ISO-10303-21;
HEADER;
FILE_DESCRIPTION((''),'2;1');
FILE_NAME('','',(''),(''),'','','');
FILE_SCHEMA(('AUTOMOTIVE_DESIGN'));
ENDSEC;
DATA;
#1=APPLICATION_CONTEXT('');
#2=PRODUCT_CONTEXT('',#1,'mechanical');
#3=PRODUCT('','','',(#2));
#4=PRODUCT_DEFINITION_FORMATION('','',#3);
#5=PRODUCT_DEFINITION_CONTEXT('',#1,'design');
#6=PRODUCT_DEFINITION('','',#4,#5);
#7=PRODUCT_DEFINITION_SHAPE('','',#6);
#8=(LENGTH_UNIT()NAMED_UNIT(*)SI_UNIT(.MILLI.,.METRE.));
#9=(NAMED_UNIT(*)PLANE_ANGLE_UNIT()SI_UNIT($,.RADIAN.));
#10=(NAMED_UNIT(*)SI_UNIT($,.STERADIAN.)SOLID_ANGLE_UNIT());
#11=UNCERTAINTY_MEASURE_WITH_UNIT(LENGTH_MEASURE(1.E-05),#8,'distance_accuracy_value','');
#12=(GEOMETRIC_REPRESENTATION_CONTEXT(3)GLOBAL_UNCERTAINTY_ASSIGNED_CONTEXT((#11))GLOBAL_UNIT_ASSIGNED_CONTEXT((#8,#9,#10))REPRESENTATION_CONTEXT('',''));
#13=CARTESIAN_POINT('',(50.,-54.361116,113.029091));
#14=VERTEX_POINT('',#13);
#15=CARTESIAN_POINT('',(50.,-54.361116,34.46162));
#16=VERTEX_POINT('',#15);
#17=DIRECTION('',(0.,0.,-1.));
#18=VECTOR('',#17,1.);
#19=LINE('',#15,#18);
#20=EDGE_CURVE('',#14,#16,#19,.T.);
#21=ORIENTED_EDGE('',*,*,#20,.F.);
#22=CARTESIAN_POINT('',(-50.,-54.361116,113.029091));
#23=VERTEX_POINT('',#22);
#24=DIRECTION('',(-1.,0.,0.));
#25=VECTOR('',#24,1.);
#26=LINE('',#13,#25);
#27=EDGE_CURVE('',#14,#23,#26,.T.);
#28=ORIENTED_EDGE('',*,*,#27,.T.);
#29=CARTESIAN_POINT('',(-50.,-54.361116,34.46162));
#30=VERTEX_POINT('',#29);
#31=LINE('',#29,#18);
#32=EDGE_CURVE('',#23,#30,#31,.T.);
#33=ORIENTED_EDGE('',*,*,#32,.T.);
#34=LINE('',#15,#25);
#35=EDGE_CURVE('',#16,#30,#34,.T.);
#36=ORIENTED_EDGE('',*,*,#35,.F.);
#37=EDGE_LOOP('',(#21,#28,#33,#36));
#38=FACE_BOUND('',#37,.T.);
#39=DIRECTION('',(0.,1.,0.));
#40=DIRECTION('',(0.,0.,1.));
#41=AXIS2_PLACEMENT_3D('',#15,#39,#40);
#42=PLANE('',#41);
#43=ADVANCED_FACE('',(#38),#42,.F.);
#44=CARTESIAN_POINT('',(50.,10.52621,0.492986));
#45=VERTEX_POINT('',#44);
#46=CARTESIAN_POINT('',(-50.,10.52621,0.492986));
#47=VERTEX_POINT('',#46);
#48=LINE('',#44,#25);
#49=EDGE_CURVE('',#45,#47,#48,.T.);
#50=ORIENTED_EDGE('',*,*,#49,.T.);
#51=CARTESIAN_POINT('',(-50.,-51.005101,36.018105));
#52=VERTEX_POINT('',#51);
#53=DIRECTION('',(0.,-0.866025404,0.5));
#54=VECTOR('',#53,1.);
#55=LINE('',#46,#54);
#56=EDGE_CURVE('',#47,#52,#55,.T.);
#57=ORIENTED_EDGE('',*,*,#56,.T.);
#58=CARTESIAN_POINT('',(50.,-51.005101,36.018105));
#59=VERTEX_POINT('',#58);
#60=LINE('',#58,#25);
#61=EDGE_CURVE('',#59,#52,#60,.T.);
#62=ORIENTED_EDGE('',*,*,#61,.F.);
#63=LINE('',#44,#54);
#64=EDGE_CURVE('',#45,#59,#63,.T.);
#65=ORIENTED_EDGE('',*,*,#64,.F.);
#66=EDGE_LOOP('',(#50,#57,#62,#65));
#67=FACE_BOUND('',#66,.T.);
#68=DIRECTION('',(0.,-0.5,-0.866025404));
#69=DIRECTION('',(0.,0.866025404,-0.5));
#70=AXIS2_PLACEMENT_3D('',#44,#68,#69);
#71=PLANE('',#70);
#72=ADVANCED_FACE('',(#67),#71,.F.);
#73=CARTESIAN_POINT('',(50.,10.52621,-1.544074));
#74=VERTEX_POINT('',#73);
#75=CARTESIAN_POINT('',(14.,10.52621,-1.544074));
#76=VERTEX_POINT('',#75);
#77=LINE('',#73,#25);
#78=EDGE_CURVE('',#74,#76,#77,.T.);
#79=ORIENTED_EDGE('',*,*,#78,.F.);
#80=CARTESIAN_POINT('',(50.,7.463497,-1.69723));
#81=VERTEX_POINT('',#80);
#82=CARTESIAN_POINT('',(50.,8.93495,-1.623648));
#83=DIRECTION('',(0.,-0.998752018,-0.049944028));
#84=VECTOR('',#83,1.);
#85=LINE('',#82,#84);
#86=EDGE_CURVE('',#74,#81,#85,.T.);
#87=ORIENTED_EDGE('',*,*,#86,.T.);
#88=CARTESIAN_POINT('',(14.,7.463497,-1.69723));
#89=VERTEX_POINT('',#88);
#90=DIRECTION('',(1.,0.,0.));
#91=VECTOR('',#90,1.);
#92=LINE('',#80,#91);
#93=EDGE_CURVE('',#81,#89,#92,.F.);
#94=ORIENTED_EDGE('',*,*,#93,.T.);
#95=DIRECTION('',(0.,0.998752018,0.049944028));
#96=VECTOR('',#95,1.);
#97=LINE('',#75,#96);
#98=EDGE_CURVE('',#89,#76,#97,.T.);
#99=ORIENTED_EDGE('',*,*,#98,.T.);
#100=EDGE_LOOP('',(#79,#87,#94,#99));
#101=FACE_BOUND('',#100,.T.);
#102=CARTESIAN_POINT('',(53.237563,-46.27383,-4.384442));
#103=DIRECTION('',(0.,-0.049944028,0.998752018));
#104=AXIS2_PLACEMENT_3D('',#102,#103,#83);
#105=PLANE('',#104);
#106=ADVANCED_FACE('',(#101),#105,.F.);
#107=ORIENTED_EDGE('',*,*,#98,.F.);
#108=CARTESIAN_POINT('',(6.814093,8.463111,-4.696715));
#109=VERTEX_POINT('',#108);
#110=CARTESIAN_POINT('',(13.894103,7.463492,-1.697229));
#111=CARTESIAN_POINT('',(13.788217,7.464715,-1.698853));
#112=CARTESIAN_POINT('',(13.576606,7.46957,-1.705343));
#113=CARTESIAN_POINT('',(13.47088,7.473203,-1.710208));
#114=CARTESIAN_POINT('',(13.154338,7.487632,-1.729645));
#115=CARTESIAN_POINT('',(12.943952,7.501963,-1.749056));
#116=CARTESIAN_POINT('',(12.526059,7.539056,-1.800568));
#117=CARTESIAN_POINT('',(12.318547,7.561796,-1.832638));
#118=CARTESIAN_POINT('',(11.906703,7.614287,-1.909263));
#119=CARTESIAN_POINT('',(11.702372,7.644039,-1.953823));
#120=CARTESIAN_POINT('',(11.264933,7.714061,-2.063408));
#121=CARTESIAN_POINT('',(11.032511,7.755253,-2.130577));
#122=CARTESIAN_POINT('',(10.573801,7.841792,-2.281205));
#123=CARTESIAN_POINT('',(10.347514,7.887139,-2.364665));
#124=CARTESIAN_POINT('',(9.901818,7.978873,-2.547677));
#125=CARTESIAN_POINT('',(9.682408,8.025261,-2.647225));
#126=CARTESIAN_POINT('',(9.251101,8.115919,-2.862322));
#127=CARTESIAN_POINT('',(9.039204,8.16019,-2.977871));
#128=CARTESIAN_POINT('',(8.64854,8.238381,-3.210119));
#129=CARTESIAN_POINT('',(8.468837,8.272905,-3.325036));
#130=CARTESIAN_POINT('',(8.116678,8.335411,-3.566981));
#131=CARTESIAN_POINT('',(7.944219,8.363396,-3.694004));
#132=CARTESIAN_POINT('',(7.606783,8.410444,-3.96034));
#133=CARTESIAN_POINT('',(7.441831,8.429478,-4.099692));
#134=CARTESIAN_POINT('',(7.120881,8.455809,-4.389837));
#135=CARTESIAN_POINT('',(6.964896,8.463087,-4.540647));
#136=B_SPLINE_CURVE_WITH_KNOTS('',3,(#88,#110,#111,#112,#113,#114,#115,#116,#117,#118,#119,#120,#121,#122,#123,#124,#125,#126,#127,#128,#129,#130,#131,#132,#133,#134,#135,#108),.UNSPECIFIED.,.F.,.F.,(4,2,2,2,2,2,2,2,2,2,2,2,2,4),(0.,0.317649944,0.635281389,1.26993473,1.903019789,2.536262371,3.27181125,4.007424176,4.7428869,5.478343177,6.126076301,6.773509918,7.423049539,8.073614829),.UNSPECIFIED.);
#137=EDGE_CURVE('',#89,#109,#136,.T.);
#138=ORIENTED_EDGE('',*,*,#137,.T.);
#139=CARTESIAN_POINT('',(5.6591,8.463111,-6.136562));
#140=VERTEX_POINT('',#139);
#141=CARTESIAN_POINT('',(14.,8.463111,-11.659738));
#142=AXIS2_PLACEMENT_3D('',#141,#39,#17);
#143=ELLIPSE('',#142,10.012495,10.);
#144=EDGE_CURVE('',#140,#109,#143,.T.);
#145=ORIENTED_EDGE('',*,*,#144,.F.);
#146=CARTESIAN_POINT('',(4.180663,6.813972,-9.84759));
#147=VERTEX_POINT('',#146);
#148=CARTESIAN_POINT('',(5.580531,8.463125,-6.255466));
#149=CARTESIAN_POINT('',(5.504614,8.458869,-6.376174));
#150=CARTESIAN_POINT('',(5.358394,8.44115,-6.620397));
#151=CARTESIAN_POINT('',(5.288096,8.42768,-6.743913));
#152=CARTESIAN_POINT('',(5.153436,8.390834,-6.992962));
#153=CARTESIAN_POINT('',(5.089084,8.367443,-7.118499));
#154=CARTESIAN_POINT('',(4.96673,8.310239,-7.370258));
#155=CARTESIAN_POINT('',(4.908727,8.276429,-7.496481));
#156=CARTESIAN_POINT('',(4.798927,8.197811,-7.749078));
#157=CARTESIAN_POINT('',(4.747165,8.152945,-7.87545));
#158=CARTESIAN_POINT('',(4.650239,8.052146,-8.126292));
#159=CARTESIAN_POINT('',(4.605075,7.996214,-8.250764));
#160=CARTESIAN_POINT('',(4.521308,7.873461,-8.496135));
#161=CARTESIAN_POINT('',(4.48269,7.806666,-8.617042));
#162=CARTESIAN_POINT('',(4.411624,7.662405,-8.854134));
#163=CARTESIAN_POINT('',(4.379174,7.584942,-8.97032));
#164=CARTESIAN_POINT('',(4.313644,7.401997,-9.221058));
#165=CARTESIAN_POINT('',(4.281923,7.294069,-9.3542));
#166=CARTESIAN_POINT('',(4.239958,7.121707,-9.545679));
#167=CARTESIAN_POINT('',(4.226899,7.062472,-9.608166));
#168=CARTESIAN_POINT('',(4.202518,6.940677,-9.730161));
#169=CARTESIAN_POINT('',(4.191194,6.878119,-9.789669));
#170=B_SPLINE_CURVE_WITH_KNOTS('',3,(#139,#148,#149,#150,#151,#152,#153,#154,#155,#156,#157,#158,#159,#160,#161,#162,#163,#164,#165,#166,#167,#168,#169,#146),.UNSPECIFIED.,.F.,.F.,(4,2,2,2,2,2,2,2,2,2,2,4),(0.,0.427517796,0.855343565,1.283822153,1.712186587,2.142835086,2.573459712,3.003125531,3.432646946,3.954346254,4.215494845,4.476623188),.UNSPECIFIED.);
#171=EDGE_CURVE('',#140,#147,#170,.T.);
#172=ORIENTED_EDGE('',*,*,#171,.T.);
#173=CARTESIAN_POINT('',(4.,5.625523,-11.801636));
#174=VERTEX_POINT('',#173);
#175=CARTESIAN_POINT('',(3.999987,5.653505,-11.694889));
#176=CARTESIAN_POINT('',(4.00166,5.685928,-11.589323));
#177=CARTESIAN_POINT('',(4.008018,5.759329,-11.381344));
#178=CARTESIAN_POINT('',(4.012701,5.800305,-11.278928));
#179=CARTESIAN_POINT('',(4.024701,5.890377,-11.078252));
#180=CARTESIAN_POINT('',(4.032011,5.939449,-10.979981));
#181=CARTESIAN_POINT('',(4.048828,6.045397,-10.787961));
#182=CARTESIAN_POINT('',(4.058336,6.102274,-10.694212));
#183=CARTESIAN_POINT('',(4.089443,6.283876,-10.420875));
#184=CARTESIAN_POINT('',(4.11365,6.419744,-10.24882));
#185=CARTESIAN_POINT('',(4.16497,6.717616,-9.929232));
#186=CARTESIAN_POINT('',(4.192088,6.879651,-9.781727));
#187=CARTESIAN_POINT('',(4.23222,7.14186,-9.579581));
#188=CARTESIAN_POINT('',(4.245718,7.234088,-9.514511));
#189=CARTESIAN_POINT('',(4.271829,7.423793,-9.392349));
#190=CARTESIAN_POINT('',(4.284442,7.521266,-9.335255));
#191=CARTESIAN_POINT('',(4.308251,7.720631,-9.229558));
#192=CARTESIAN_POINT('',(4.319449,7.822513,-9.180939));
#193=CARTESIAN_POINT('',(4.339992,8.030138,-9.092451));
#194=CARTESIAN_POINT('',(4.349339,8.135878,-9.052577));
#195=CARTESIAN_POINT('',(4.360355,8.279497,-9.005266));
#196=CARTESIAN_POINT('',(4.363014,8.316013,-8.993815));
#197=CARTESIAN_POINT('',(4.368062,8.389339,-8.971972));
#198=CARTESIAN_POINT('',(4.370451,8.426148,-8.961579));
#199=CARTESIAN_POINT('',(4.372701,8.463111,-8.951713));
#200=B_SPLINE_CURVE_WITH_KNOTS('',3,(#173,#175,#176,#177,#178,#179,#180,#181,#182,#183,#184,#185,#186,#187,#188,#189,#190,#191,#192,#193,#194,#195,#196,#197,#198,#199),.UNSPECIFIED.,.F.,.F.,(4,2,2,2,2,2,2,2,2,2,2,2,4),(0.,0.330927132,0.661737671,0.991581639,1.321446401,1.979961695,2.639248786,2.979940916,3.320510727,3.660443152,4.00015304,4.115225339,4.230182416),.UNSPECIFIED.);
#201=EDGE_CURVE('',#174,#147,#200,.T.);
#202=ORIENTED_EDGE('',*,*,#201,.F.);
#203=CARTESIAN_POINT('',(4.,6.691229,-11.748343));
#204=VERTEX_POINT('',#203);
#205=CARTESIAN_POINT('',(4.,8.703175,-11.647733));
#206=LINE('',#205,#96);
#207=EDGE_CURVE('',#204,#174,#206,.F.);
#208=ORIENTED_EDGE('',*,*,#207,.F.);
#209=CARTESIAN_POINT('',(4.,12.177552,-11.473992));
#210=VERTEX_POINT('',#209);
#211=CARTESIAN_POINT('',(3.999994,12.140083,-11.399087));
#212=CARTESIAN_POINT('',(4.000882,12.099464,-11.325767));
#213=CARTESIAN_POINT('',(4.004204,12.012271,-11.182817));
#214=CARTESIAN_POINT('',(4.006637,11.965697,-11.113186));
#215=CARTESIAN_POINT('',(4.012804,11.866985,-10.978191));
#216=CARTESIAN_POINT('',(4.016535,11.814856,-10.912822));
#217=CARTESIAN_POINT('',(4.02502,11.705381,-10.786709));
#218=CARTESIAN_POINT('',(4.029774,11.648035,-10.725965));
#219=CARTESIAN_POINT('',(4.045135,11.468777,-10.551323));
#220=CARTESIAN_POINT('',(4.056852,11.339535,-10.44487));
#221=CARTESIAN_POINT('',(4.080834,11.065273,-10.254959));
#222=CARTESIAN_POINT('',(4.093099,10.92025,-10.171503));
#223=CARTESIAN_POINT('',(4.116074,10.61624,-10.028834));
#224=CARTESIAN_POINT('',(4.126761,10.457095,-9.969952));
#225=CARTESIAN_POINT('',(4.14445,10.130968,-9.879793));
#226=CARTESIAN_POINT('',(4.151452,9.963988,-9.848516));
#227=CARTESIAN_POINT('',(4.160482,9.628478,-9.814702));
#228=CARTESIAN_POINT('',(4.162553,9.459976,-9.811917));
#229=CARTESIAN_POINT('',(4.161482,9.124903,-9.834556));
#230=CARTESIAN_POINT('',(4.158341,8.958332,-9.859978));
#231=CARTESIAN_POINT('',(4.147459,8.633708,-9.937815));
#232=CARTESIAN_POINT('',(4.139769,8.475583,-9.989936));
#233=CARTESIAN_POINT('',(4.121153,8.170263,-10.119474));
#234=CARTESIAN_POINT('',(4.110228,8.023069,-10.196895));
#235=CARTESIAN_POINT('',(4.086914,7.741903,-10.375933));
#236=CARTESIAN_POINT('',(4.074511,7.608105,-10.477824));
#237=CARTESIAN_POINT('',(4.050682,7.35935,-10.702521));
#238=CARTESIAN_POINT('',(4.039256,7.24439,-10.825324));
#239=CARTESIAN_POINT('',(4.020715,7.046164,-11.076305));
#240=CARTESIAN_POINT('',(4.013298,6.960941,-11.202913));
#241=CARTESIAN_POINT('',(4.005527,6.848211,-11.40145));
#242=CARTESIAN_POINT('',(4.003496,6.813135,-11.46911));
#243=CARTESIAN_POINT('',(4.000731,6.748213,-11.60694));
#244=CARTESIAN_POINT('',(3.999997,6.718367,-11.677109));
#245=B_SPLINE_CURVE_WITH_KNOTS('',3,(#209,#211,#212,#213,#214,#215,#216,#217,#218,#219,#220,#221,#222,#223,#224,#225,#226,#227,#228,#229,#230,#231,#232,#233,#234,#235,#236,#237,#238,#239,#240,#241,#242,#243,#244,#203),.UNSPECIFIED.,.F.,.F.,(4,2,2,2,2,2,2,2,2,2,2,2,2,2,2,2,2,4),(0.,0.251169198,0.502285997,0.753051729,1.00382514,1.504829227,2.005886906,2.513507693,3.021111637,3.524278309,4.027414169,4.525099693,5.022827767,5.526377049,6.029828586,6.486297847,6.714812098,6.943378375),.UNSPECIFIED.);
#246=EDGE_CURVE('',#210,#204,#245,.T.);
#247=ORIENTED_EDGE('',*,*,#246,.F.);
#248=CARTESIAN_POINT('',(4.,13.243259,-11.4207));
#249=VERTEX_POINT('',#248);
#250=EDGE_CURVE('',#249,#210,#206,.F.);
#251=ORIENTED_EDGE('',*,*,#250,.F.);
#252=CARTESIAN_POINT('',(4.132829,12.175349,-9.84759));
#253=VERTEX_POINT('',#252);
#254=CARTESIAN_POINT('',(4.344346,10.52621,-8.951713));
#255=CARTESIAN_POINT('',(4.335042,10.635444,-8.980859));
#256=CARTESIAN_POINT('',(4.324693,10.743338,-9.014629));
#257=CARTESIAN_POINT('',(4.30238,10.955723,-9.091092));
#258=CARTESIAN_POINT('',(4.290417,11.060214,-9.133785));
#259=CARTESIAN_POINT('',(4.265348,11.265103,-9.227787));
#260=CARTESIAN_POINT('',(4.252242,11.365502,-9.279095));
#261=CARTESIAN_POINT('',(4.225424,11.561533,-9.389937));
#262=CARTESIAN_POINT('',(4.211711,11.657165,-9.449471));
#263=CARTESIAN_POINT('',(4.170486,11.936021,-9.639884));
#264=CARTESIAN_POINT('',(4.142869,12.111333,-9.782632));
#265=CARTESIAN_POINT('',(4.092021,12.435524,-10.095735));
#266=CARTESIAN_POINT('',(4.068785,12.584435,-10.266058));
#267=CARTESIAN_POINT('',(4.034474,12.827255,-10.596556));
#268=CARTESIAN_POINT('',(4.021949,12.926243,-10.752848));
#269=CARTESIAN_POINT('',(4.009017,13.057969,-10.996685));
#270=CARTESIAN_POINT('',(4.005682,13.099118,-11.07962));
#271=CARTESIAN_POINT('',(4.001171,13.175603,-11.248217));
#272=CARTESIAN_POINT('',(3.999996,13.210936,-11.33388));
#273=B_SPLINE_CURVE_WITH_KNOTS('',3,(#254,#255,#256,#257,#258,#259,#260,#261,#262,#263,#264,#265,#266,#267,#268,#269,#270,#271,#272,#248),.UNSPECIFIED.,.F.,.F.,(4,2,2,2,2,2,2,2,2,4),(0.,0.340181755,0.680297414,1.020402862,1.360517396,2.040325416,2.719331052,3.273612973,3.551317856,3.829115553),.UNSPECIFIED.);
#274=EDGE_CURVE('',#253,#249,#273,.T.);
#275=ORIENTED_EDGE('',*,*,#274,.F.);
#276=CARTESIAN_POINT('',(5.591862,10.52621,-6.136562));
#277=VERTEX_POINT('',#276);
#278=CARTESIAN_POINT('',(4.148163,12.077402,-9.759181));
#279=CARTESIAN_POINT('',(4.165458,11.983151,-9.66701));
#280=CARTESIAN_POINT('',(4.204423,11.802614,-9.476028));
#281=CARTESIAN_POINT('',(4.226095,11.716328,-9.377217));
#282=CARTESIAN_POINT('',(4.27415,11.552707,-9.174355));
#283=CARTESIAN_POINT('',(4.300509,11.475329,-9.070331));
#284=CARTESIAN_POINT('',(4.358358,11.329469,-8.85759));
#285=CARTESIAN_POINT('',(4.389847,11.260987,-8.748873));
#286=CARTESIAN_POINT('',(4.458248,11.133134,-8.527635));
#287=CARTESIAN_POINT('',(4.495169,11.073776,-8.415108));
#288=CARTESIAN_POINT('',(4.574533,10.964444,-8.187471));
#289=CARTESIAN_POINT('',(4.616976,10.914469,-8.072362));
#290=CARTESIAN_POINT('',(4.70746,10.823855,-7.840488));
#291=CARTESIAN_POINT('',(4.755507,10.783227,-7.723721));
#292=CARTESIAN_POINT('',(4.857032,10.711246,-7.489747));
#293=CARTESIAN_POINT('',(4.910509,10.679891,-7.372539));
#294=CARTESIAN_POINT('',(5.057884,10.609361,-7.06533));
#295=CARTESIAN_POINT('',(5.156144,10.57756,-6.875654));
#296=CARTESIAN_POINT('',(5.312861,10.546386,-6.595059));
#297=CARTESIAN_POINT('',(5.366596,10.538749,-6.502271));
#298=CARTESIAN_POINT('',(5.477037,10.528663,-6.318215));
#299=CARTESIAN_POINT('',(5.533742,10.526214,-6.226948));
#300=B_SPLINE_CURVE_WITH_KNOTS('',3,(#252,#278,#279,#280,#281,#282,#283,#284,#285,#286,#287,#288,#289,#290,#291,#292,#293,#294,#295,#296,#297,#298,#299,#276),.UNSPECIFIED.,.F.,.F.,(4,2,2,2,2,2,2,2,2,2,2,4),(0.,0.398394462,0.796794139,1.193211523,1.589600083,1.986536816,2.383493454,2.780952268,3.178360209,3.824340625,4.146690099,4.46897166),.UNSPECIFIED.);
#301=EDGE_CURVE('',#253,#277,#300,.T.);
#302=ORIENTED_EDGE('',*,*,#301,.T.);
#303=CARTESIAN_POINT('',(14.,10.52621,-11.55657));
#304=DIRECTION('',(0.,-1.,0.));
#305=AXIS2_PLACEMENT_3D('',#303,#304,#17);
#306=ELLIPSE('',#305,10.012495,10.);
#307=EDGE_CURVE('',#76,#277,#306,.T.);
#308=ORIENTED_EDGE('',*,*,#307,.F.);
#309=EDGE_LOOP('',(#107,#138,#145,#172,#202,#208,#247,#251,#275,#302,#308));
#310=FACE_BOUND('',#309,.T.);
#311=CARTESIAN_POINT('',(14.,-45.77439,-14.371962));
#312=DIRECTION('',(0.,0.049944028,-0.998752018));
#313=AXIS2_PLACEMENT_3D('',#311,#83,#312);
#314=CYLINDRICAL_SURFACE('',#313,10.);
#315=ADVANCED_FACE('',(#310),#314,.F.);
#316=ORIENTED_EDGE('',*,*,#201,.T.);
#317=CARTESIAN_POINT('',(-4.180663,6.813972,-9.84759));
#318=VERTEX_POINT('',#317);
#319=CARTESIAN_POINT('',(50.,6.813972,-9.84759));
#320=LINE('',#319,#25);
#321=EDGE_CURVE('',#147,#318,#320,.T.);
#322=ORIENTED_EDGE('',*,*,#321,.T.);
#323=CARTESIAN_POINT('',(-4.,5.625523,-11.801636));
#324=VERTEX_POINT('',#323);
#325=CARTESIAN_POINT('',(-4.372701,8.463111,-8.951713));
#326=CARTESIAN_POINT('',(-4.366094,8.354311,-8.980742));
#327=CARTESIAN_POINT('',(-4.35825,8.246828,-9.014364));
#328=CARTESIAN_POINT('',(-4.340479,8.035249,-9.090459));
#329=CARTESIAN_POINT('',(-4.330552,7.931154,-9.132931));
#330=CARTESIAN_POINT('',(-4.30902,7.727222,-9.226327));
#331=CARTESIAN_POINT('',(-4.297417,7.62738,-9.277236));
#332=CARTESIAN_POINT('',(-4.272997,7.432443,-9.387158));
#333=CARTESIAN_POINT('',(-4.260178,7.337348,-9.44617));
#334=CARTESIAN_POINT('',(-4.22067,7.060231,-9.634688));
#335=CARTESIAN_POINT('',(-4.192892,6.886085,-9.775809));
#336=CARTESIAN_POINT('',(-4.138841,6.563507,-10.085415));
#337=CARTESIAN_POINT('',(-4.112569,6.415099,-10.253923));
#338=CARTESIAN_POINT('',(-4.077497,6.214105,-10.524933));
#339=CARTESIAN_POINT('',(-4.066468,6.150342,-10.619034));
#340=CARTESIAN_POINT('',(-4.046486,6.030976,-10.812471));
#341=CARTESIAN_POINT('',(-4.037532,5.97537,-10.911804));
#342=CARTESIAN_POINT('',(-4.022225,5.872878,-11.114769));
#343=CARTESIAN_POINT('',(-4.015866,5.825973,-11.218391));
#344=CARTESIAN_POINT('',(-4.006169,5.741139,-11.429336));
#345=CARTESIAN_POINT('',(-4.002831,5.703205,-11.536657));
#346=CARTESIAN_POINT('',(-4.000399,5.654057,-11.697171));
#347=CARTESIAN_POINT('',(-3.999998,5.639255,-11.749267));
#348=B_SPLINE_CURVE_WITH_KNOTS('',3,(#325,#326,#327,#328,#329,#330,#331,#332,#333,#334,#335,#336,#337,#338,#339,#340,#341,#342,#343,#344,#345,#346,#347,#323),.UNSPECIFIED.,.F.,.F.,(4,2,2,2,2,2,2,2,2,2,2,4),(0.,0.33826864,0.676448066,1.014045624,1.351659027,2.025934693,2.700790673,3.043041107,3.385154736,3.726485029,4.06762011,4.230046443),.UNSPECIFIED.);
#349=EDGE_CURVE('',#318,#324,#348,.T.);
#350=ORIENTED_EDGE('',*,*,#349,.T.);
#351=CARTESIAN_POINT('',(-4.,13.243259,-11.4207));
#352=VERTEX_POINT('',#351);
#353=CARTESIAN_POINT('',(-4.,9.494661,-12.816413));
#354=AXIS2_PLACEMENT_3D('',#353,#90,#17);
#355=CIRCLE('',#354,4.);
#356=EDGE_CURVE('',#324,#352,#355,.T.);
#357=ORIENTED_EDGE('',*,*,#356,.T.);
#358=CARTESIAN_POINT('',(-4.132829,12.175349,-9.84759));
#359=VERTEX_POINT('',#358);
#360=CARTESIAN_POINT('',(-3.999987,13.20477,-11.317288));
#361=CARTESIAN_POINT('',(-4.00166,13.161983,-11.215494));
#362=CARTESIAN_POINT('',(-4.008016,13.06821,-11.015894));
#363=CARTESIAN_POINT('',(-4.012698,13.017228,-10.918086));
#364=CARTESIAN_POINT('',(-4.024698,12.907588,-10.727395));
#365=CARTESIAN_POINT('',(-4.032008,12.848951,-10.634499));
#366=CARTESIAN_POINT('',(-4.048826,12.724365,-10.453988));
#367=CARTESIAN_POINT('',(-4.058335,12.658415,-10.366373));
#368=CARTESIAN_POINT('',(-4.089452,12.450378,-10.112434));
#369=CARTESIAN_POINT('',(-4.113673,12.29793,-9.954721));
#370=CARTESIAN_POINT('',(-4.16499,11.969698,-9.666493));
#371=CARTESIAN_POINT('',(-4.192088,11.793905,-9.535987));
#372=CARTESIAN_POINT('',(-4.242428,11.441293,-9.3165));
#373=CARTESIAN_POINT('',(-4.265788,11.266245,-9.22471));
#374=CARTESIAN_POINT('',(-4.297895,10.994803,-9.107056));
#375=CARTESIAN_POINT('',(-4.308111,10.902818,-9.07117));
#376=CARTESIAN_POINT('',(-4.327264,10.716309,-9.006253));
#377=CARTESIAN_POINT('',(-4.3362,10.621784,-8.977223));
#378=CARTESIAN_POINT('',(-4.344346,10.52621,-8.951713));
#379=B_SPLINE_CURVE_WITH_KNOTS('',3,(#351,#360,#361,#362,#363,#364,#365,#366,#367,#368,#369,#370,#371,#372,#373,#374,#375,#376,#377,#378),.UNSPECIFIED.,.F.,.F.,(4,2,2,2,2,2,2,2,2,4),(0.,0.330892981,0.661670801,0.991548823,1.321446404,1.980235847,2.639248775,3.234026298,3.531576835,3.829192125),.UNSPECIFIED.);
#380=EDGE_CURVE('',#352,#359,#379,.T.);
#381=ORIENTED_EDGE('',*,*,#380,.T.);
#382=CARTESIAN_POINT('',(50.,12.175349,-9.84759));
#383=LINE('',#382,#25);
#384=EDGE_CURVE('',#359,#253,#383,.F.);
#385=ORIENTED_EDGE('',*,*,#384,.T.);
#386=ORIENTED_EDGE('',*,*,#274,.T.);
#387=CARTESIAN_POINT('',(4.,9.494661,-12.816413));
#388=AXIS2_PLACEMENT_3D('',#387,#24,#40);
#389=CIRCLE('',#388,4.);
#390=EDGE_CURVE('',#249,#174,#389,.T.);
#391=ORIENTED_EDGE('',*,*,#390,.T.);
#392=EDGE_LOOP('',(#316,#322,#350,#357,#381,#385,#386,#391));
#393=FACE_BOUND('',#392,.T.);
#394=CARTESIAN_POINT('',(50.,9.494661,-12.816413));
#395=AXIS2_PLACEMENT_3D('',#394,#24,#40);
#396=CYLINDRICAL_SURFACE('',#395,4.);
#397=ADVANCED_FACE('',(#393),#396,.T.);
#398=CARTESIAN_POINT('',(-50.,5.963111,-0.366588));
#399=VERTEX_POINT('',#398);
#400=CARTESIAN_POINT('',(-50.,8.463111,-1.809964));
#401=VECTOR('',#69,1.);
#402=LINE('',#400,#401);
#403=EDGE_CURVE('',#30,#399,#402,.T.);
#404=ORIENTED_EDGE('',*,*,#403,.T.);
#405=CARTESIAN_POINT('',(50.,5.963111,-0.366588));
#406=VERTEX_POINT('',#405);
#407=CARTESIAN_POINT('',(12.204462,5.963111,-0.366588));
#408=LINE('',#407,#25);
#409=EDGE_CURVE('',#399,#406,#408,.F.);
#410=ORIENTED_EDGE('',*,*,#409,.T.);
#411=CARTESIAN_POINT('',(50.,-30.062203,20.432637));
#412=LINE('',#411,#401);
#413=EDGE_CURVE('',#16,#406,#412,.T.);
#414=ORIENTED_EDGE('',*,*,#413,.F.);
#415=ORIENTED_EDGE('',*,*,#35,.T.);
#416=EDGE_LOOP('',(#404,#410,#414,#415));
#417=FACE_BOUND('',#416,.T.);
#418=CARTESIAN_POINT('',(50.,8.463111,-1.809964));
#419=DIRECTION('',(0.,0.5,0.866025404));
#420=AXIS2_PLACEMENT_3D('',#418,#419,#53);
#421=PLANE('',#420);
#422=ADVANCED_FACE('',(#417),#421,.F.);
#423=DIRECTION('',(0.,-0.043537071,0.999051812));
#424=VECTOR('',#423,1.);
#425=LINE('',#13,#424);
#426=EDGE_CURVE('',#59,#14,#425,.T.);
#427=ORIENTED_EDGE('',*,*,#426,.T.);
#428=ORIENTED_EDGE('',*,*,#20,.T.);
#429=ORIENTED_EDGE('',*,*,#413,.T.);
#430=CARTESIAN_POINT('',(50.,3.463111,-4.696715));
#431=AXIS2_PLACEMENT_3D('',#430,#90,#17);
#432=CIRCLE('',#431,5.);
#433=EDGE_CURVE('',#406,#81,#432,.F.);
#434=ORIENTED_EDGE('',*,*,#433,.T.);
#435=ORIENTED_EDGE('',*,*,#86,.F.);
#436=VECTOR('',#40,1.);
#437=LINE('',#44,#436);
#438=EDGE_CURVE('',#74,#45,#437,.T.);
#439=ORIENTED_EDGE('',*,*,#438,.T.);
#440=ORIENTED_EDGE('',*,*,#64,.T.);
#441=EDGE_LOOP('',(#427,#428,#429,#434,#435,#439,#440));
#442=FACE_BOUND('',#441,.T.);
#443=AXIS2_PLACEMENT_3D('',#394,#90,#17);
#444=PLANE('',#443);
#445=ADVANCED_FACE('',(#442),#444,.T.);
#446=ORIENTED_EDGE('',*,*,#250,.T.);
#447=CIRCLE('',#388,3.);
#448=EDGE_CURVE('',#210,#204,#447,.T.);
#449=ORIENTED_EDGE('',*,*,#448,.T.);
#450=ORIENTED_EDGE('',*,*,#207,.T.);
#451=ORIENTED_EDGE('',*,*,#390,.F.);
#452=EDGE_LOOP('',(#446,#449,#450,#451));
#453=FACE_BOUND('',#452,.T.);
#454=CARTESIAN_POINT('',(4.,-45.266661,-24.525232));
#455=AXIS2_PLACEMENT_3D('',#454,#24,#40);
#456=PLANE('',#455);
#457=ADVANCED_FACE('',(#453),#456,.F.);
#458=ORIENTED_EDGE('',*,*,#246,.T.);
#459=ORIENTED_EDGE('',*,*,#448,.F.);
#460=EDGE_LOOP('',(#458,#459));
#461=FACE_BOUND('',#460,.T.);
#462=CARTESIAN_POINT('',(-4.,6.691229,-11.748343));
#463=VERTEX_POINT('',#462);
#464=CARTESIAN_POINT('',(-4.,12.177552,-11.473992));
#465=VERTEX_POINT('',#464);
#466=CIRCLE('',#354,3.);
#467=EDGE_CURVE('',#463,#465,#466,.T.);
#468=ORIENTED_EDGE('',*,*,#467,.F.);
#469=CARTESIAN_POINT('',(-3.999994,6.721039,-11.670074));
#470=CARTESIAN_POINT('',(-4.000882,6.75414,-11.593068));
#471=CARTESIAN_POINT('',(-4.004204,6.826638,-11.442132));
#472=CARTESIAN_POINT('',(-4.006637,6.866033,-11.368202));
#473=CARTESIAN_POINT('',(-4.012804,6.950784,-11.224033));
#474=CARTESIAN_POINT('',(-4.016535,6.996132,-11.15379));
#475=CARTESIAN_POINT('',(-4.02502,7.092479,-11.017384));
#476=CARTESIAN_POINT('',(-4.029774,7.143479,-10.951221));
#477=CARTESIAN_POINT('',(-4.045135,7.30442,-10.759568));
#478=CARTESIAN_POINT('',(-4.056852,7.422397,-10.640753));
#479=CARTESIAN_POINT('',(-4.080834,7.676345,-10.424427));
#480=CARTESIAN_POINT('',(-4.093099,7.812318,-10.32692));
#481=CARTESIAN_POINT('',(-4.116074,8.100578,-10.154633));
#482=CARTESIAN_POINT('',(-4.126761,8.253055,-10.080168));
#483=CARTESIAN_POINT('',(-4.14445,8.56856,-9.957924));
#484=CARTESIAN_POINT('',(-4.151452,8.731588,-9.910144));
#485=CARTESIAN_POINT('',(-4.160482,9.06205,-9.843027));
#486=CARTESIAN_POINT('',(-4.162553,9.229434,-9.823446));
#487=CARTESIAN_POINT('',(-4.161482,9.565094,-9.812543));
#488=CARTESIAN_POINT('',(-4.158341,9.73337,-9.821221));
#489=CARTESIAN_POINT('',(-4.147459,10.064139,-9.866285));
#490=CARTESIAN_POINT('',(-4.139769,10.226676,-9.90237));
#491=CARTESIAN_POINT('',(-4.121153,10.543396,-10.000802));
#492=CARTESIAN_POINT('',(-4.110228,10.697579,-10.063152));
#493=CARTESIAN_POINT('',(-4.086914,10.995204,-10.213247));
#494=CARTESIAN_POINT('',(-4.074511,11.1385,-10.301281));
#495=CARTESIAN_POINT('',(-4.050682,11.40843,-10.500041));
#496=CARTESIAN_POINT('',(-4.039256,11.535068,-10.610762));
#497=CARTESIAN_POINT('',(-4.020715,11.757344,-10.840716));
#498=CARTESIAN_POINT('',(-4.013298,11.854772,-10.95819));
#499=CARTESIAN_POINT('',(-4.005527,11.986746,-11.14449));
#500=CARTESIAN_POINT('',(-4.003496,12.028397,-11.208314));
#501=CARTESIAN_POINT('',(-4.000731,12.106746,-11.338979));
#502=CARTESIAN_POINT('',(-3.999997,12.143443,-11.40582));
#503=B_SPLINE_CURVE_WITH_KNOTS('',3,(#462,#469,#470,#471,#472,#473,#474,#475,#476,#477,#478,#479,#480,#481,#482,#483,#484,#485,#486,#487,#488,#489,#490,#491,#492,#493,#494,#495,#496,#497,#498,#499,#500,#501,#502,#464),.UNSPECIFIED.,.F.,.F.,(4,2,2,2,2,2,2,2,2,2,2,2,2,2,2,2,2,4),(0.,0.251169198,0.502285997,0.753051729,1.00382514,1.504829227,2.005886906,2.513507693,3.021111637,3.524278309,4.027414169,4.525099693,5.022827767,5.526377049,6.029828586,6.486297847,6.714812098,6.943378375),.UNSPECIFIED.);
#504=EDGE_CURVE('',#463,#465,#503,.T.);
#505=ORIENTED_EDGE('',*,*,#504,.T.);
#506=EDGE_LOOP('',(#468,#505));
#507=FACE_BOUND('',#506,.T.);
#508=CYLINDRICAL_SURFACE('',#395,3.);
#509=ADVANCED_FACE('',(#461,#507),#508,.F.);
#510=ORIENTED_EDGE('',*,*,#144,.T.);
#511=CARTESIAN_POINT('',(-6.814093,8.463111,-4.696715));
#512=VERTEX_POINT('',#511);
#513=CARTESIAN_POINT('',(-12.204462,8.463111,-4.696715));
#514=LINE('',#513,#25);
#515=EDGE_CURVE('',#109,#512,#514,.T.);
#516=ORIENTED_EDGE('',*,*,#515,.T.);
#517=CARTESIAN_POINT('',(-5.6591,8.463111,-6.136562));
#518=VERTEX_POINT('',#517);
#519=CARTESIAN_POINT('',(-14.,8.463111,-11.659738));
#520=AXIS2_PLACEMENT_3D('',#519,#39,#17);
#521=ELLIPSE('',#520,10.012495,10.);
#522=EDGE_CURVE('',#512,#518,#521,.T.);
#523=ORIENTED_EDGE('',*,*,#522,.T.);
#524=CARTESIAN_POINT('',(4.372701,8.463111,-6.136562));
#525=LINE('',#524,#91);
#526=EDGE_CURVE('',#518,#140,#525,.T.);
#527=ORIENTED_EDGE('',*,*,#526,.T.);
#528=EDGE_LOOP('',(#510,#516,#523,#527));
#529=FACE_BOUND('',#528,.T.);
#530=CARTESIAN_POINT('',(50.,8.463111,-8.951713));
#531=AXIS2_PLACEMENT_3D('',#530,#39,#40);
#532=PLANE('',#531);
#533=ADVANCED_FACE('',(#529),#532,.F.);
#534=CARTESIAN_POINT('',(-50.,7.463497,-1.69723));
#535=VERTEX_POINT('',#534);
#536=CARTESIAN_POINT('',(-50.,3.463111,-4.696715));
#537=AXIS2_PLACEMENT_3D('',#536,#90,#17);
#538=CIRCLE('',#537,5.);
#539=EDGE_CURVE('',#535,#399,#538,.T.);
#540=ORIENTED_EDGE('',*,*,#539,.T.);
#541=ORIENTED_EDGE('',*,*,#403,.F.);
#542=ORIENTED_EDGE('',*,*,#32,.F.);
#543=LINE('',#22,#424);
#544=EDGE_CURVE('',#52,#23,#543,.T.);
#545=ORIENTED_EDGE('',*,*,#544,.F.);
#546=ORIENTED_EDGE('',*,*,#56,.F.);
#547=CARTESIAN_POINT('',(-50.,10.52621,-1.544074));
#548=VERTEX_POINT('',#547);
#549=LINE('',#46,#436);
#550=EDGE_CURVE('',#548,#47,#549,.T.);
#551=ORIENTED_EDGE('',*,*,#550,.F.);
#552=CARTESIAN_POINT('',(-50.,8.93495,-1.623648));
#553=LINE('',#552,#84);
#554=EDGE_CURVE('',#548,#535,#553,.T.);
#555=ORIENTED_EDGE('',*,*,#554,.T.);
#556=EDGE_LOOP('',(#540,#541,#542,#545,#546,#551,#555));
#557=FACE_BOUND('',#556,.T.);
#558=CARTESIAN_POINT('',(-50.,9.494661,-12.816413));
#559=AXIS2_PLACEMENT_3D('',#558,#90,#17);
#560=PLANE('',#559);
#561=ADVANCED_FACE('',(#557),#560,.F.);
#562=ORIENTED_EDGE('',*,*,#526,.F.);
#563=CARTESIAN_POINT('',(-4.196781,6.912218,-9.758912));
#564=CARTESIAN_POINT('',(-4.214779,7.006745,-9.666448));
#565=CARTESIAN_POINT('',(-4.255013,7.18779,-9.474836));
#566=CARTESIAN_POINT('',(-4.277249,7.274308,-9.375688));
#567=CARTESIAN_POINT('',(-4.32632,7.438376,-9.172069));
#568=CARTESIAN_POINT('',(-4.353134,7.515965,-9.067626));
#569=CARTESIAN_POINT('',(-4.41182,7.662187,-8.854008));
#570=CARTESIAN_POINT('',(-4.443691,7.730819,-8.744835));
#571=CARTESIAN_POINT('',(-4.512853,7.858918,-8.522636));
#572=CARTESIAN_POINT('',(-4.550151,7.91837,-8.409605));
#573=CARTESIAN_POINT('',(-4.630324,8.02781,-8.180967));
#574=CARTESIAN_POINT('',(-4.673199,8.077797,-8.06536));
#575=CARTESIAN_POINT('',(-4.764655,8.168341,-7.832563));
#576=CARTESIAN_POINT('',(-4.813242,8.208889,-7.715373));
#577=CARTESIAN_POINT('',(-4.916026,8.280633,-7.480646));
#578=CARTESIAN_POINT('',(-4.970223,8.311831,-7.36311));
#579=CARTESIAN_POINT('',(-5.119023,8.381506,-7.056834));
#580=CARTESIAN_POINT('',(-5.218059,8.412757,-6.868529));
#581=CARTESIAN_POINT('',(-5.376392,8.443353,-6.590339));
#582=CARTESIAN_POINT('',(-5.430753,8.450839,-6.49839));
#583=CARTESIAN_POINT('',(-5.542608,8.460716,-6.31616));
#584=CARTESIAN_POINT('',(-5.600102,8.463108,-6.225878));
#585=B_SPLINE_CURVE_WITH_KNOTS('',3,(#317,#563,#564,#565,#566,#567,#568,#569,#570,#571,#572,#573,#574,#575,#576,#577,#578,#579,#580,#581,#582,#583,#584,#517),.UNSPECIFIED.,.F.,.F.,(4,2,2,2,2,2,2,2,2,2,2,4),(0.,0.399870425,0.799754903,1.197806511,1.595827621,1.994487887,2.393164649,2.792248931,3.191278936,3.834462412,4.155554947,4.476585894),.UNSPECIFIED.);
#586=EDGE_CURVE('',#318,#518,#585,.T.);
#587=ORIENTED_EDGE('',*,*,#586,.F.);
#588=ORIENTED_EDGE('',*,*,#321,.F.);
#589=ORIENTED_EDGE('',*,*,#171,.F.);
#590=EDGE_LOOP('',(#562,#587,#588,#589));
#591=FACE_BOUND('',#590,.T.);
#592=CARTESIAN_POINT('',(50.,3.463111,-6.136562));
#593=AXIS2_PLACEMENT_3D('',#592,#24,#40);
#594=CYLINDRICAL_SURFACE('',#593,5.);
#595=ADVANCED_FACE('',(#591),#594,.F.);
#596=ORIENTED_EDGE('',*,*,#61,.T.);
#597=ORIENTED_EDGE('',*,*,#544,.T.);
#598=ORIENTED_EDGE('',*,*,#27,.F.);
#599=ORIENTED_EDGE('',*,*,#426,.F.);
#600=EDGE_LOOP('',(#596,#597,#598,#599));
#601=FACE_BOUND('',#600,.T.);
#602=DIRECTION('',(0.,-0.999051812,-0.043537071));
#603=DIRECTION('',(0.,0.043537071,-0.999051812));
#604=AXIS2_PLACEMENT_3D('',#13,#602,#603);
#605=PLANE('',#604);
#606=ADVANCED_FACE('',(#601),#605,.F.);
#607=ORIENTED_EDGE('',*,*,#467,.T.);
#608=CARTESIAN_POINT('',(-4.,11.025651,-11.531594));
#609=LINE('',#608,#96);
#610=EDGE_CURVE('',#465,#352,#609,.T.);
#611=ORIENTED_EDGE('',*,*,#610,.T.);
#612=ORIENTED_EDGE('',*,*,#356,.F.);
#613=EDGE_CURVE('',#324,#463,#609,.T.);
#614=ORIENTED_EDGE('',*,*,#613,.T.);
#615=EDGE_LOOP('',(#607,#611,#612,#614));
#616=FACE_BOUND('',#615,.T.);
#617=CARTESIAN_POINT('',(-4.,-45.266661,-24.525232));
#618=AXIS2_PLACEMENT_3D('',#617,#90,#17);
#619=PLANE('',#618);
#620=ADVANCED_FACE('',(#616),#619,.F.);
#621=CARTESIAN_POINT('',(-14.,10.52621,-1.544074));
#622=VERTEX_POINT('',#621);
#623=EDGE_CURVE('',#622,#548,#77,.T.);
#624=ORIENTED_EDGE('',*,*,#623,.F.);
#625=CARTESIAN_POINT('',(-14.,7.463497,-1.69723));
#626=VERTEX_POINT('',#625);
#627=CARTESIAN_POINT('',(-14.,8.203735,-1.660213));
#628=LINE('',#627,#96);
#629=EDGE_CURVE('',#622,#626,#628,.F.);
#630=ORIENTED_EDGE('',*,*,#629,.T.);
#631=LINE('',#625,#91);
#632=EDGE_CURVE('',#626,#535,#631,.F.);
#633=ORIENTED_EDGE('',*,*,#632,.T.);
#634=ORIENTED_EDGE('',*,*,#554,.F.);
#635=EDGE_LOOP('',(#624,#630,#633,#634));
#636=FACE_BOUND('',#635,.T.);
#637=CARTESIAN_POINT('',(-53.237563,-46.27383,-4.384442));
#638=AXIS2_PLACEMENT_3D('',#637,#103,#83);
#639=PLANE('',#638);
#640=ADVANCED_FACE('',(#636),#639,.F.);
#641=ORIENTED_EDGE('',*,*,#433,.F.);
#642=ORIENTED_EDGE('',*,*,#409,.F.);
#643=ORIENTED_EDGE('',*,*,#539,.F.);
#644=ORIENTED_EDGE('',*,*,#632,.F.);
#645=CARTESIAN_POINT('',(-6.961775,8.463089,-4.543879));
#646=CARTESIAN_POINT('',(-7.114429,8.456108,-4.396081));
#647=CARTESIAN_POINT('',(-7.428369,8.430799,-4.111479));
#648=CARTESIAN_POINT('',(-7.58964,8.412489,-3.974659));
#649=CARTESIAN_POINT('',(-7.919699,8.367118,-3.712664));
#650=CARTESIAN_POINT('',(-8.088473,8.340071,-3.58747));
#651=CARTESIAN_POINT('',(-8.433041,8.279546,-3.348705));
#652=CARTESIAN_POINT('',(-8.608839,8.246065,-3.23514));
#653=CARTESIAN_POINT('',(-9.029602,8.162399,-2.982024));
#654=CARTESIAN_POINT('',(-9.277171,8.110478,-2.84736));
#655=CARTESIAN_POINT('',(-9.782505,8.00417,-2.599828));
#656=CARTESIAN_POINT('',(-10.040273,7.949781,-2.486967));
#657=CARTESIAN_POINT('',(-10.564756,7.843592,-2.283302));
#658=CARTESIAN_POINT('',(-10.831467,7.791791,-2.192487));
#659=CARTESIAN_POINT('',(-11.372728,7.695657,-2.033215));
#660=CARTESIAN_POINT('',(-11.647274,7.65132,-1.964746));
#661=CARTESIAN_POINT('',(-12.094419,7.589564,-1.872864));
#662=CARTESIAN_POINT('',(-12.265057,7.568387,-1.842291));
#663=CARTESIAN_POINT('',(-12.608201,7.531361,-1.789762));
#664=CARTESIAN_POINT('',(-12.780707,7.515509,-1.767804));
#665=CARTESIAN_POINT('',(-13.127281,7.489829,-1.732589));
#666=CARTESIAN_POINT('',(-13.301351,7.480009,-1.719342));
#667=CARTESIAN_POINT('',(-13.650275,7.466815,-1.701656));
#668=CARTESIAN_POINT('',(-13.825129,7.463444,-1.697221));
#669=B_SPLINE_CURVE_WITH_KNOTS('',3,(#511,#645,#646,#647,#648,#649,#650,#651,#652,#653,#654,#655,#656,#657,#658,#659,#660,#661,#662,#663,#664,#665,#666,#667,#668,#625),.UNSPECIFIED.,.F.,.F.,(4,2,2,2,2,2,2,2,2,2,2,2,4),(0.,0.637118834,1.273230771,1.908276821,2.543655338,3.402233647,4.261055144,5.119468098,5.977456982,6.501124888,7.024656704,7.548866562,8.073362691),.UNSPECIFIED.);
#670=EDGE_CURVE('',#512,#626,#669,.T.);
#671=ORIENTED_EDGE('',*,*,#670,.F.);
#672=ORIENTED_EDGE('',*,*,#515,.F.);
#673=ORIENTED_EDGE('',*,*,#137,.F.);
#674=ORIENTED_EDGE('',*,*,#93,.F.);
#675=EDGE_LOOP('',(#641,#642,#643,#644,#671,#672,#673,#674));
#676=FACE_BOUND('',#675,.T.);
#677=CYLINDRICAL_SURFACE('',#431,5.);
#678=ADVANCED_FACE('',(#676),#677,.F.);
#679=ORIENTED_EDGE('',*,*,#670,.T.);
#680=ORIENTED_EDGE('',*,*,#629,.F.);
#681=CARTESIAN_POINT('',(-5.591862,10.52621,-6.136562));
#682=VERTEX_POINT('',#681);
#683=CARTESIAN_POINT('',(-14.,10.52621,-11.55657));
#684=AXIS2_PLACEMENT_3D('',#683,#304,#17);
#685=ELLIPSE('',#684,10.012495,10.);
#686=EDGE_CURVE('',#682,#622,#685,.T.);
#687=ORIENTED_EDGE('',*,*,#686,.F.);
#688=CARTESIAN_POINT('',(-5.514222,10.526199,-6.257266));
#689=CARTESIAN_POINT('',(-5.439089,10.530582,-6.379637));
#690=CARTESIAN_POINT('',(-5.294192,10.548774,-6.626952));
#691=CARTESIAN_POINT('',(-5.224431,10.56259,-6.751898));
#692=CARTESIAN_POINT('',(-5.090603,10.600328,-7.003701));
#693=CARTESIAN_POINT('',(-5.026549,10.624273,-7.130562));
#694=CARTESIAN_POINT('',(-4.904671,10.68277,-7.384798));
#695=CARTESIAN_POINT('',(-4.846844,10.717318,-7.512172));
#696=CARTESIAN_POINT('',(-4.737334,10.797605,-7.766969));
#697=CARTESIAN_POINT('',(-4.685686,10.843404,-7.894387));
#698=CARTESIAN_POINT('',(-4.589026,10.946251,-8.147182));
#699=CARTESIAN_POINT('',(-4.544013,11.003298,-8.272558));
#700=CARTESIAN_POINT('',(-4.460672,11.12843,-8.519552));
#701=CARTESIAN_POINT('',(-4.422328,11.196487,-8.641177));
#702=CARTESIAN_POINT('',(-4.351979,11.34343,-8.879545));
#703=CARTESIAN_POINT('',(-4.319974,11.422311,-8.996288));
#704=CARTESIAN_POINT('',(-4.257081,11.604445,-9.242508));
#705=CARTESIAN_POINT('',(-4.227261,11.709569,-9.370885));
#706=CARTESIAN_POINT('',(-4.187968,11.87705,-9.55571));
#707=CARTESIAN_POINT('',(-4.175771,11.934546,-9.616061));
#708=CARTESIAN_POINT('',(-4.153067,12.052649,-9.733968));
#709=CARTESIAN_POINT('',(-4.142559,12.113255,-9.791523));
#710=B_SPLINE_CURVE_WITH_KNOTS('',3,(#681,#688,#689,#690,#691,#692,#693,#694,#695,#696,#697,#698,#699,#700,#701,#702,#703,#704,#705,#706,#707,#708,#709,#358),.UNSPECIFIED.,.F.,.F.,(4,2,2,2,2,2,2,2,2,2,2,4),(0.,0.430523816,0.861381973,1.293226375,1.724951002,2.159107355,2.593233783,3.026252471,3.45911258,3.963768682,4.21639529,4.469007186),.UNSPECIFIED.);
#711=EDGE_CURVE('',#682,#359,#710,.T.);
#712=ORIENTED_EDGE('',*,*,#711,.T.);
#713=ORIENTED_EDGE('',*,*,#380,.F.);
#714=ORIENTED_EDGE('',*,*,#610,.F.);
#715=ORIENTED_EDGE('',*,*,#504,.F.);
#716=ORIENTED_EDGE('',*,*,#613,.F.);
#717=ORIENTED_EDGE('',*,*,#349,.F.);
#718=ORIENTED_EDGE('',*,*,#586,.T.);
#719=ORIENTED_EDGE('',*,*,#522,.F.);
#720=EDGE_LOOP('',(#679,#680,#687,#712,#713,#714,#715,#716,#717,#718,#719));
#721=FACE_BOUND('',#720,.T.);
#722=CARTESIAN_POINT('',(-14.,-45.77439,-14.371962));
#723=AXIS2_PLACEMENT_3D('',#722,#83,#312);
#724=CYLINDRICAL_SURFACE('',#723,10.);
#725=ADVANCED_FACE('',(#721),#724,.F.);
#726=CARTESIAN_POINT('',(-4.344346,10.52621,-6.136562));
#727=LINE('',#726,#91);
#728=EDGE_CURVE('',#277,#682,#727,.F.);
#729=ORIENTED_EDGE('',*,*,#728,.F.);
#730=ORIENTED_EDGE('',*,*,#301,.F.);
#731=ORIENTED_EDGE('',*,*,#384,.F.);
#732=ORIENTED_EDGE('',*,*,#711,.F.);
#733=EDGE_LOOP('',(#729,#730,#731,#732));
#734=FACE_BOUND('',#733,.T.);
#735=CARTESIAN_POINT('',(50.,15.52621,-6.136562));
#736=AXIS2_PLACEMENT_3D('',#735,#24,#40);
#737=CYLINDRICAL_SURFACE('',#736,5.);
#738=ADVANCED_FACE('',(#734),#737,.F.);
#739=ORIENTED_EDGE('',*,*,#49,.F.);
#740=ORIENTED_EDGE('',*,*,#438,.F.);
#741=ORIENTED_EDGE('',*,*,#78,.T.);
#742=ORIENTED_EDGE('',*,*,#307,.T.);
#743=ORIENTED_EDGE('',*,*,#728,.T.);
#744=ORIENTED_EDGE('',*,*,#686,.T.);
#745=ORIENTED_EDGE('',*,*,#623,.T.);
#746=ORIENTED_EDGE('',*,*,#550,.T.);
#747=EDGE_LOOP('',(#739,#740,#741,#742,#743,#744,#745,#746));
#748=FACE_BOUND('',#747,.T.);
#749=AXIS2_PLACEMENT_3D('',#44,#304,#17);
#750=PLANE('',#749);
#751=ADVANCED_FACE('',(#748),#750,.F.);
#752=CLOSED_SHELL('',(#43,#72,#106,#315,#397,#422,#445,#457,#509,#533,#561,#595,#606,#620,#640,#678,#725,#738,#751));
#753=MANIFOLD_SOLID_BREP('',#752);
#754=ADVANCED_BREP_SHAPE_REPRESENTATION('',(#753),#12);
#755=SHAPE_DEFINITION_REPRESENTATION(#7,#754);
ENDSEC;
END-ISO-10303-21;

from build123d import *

# Parameters (mm, degrees)
SKETCH1_R           = 3
BOSS_EXTRUDE1_DEPTH = 50
SKETCH2_W           = 49.237563161
SKETCH2_H           = 20.165956609
CUT_EXTRUDE1_DEPTH  = 35
FILLET1_R           = 10
FILLET3_START       = -50
FILLET3_DEPTH       = 100
FILLET3_START_2     = -14.0000001
FILLET3_2_DEPTH     = 28.0000001
FILLET3_START_3     = 5.029081153
FILLET3_3_DEPTH     = 7.627254367
FILLET4_R           = 5


with BuildPart() as part:
    # Sketch1 → Boss-Extrude1 (new, symmetric)
    with BuildSketch(Plane(origin=(0, 0, 0), x_dir=(0, 0, -1), z_dir=(1, 0, 0))):
        with BuildLine():
            Line((8.951712986, 8.463111178), (1.809964066, 8.463111178))
            Line((1.809964066, 8.463111178), (-10.541427431, -12.930126439))
            Line((-10.541427431, -12.930126439), (-20.432636562, -30.062203202))
            Line((-20.432636562, -30.062203202), (-34.461620266, -54.361115756))
            Line((-34.461620266, -54.361115756), (-113.02909109, -54.361115756))
            Line((-113.02909109, -54.361115756), (-36.018105083, -51.005100845))
            Line((-36.018105083, -51.005100845), (-0.492985983, 10.526210382))
            Line((-0.492985983, 10.526210382), (8.951712986, 10.526210382))
            ThreePointArc((8.951712986, 10.526210382), (16.816412899, 9.49466078), (8.951712986, 8.463111178))
        make_face()
        with Locations((12.816412899, 9.49466078)):
            Circle(SKETCH1_R, mode=Mode.SUBTRACT)
    extrude(amount=BOSS_EXTRUDE1_DEPTH, both=True)

    # Sketch2 → Cut-Extrude1 (cut, symmetric)
    with BuildSketch(Plane(origin=(0, -11.420787425, -0.571112862), x_dir=(1, 0, 0), z_dir=(0, 0.9987520183198841, 0.04994402769058576))):
        Polygon((-41.345711691, -80.976381383), (-37.345711691, -80.976381383), (-37.345711691, -96.642858944), (-33.68226718, -102.621642139), (-29.345711691, -96.642858944), (-29.345711691, -80.976381383), (-25.345711691, -80.976381383), (-25.345711691, -96.642858944), (-21.68226718, -102.621642139), (-17.345711691, -96.642858944), (-17.345711691, -80.976381383), (-13.345711691, -80.976381383), (-13.345711691, -96.642858944), (-9.68226718, -102.621642139), (-5.345711691, -96.642858944), (-5.345711691, -80.976381383), (-1.345711691, -80.976381383), (-1.345711691, -96.642858944), (2.31773282, -102.621642139), (6.654288309, -96.642858944), (6.654288309, -80.976381383), (10.654288309, -80.976381383), (10.654288309, -96.642858944), (14.31773282, -102.621642139), (18.654288309, -96.642858944), (18.654288309, -80.976381383), (22.654288309, -80.976381383), (22.654288309, -96.642858944), (26.31773282, -102.621642139), (30.654288309, -96.642858944), (30.654288309, -80.976381383), (34.654288309, -80.976381383), (34.654288309, -96.642858944), (38.31773282, -102.621642139), (42.654288309, -96.642858944), (42.654288309, -80.976381383), (46.654288309, -80.976381383), (46.654288309, -96.642858944), (50.31773282, -102.621642139), (54.654288309, -96.642858944), (54.654288309, -80.976381383), (58.654288309, -80.976381383), (58.654288309, -96.642858944), (58.654288309, -117.647520094), (-58.342792285, -117.647520094), (-58.342792285, -96.642858944), (-49.345711691, -96.642858944), (-45.68226718, -102.621642139), (-41.345711691, -96.642858944), align=None)
        with Locations((-28.618781581, 12.150846953)):
            Rectangle(SKETCH2_W, SKETCH2_H)
        with Locations((28.618781581, 12.150846953)):
            Rectangle(SKETCH2_W, SKETCH2_H)
    extrude(amount=CUT_EXTRUDE1_DEPTH, both=True, mode=Mode.SUBTRACT)

    # Fillet1
    # the kernel refuses this fillet: 10 mm, written as the material it adds along each edge
    with BuildSketch(Plane(origin=(-4, 35.49501084, -0.295473589), x_dir=(0, 0.049944027690585764, -0.9987520183198841), z_dir=(0, -0.9987520183198841, -0.04994402769058576))) as fillet1_piece_1_section:
        with BuildLine():
            CenterArc((FILLET1_R, -FILLET1_R), FILLET1_R, 90, 90)
            Line((0, -FILLET1_R), (0, 0))
            Line((0, 0), (FILLET1_R, 0))
        make_face()
    fillet1_piece_1 = extrude(amount=52.325377672, mode=Mode.PRIVATE)
    fillet1_piece_1 = split(fillet1_piece_1, bisect_by=Plane(origin=(-4, 8.463111178, -0.295473589), z_dir=(0, 1, 0)), keep=Keep.TOP, mode=Mode.PRIVATE)
    fillet1_piece_1 = split(fillet1_piece_1, bisect_by=Plane(origin=(-4, 10.526210382, -0.295473589), z_dir=(0, -1, 0)), keep=Keep.TOP, mode=Mode.PRIVATE)
    fillet1_piece_1 = fillet1_piece_1 - Plane(origin=(-4, 9.49466078, -12.816412899), x_dir=(0, 0, -1), z_dir=(-1, 0, 0)) * Cylinder(3, 145, mode=Mode.PRIVATE)
    add(fillet1_piece_1)
    with BuildSketch(Plane(origin=(-4, 35.49501084, -0.295473589), x_dir=(0, 0.049944027690585764, -0.9987520183198841), z_dir=(0, -0.9987520183198841, -0.04994402769058576))) as fillet1_piece_2_section:
        with BuildLine():
            CenterArc((FILLET1_R, -FILLET1_R), FILLET1_R, 90, 90)
            Line((0, -FILLET1_R), (0, 0))
            Line((0, 0), (FILLET1_R, 0))
        make_face()
    fillet1_piece_2 = extrude(amount=52.325377672, mode=Mode.PRIVATE)
    fillet1_piece_2 = split(fillet1_piece_2, bisect_by=Plane(origin=(-4, 28.081242311, -13.136497357), z_dir=(0, 0.4999999999999977, 0.8660254037844399)), keep=Keep.TOP, mode=Mode.PRIVATE)
    fillet1_piece_2 = split(fillet1_piece_2, bisect_by=Plane(origin=(-4, 10.526210382, -0.295473589), z_dir=(0, -1, 0)), keep=Keep.TOP, mode=Mode.PRIVATE)
    add(fillet1_piece_2)
    with BuildSketch(Plane(origin=(-4, 35.49501084, -0.295473589), x_dir=(0, 0.049944027690585764, -0.9987520183198841), z_dir=(0, -0.9987520183198841, -0.04994402769058576))) as fillet1_piece_3_section:
        with BuildLine():
            CenterArc((FILLET1_R, -FILLET1_R), FILLET1_R, 90, 90)
            Line((0, -FILLET1_R), (0, 0))
            Line((0, 0), (FILLET1_R, 0))
        make_face()
    fillet1_piece_3 = extrude(amount=52.325377672, mode=Mode.PRIVATE)
    fillet1_piece_3 = fillet1_piece_3 & Plane(origin=(-4, 9.49466078, -12.816412899), x_dir=(0, 0.2578874004491323, 0.9661749782982318), z_dir=(1, 0, 0)) * Cylinder(4, 145, mode=Mode.PRIVATE)
    fillet1_piece_3 = fillet1_piece_3 - Plane(origin=(-4, 9.49466078, -12.816412899), x_dir=(0, 0, -1), z_dir=(-1, 0, 0)) * Cylinder(3, 145, mode=Mode.PRIVATE)
    add(fillet1_piece_3)
    with BuildSketch(Plane(origin=(4, -16.76506572, -2.908813701), x_dir=(0, 0.049944027690585764, -0.9987520183198841), z_dir=(0, 0.9987520183198841, 0.04994402769058576))) as fillet1_piece_4_section:
        with BuildLine():
            CenterArc((FILLET1_R, -FILLET1_R), FILLET1_R, 90, 90)
            Line((0, -FILLET1_R), (0, 0))
            Line((0, 0), (FILLET1_R, 0))
        make_face()
    fillet1_piece_4 = extrude(amount=52.325377672, mode=Mode.PRIVATE)
    fillet1_piece_4 = split(fillet1_piece_4, bisect_by=Plane(origin=(4, -9.982205646, 8.839444568), z_dir=(0, 0.4999999999999977, 0.8660254037844399)), keep=Keep.TOP, mode=Mode.PRIVATE)
    fillet1_piece_4 = split(fillet1_piece_4, bisect_by=Plane(origin=(4, 10.526210382, -2.908813701), z_dir=(0, -1, 0)), keep=Keep.TOP, mode=Mode.PRIVATE)
    add(fillet1_piece_4)
    with BuildSketch(Plane(origin=(4, -16.76506572, -2.908813701), x_dir=(0, 0.049944027690585764, -0.9987520183198841), z_dir=(0, 0.9987520183198841, 0.04994402769058576))) as fillet1_piece_5_section:
        with BuildLine():
            CenterArc((FILLET1_R, -FILLET1_R), FILLET1_R, 90, 90)
            Line((0, -FILLET1_R), (0, 0))
            Line((0, 0), (FILLET1_R, 0))
        make_face()
    fillet1_piece_5 = extrude(amount=52.325377672, mode=Mode.PRIVATE)
    fillet1_piece_5 = split(fillet1_piece_5, bisect_by=Plane(origin=(4, 8.463111178, -2.908813701), z_dir=(0, 1, 0)), keep=Keep.TOP, mode=Mode.PRIVATE)
    fillet1_piece_5 = split(fillet1_piece_5, bisect_by=Plane(origin=(4, 10.526210382, -2.908813701), z_dir=(0, -1, 0)), keep=Keep.TOP, mode=Mode.PRIVATE)
    fillet1_piece_5 = fillet1_piece_5 - Plane(origin=(4, 9.49466078, -12.816412899), x_dir=(0, 0, -1), z_dir=(-1, 0, 0)) * Cylinder(3, 145, mode=Mode.PRIVATE)
    add(fillet1_piece_5)
    with BuildSketch(Plane(origin=(4, -16.76506572, -2.908813701), x_dir=(0, 0.049944027690585764, -0.9987520183198841), z_dir=(0, 0.9987520183198841, 0.04994402769058576))) as fillet1_piece_6_section:
        with BuildLine():
            CenterArc((FILLET1_R, -FILLET1_R), FILLET1_R, 90, 90)
            Line((0, -FILLET1_R), (0, 0))
            Line((0, 0), (FILLET1_R, 0))
        make_face()
    fillet1_piece_6 = extrude(amount=52.325377672, mode=Mode.PRIVATE)
    fillet1_piece_6 = fillet1_piece_6 & Plane(origin=(4, 9.49466078, -12.816412899), x_dir=(0, 0.2578874004491323, 0.9661749782982318), z_dir=(1, 0, 0)) * Cylinder(4, 145, mode=Mode.PRIVATE)
    fillet1_piece_6 = fillet1_piece_6 - Plane(origin=(4, 9.49466078, -12.816412899), x_dir=(0, 0, -1), z_dir=(-1, 0, 0)) * Cylinder(3, 145, mode=Mode.PRIVATE)
    add(fillet1_piece_6)

    # Fillet3: read off the stored shape, not the designer's step
    # Fillet3 outline → Fillet3 (add)
    with BuildSketch(Plane.YZ.offset(FILLET3_START)):
        with BuildLine():
            Line((7.463496818, -1.697229668), (8.203734738, -1.660213009))
            Line((8.203734738, -1.660213009), (5.963111178, -0.366588393))
            ThreePointArc((5.963111178, -0.366588393), (6.780701406, -0.955914016), (7.463496818, -1.697229668))
        make_face()
    extrude(amount=FILLET3_DEPTH)

    # Fillet3 2 outline → Fillet3 2 (add)
    with BuildSketch(Plane.YZ.offset(FILLET3_START_2)):
        with BuildLine():
            Line((8.463111178, -1.809964066), (8.203734738, -1.660213009))
            Line((8.203734738, -1.660213009), (7.463496818, -1.697229668))
            ThreePointArc((7.463496818, -1.697229668), (8.206629292, -3.115881487), (8.463111178, -4.696715412))
            Line((8.463111178, -4.696715412), (8.463111178, -1.809964066))
        make_face()
    extrude(amount=FILLET3_2_DEPTH)

    # Fillet3 3 outline → Fillet3 3 (cut)
    with BuildSketch(Plane(origin=(0, 0, 0), x_dir=(1, 0, 0), z_dir=(0, 0.998752018319884, 0.0499440276905858)).offset(FILLET3_START_3)):
        with BuildLine():
            ThreePointArc((-14, 2.067868648), (-9.034050266, 3.38804473), (-5.379286145, 7))
            Line((-5.379286145, 7), (-14.0000001, 7))
            Line((-14.0000001, 7), (-14, 2.067868648))
        make_face()
        with BuildLine():
            Line((14, 7), (5.379286145, 7))
            ThreePointArc((5.379286145, 7), (9.034050266, 3.38804473), (14, 2.067868648))
            Line((14, 2.067868648), (14, 7))
        make_face()
    extrude(amount=FILLET3_3_DEPTH, mode=Mode.SUBTRACT)

    # Fillet4
    # the kernel refuses this fillet: 5 mm, written as the material it adds along each edge
    with BuildSketch(Plane(origin=(-11.410578331, 8.463111178, -8.951712972), x_dir=(-4.3911864757766885e-10, -0.8787125753545649, -0.47735124375426957), z_dir=(1.0, 9.37113186758836e-13, -9.216318308073321e-10))) as fillet4_piece_1_section:
        with BuildLine():
            CenterArc((3.049747005, -4.860464878), FILLET4_R, 103.567804979, 47.919645029)
            Line((-1.343815871, -2.473708659), (0, 0))
            ThreePointArc((0, 0), (0.938383697, -0.111628098), (1.876767394, 0))
        make_face()
    fillet4_piece_1 = extrude(amount=15.410578331, mode=Mode.PRIVATE)
    fillet4_piece_1 = fillet4_piece_1 - Plane(origin=(-14, 8.598192062, -11.652983015), x_dir=(0, 0.04994402769099318, -0.9987520183198637), z_dir=(0, 0.9987520183198637, 0.04994402769099318)) * Cylinder(10, 41, mode=Mode.PRIVATE)
    add(fillet4_piece_1)
    with BuildSketch(Plane(origin=(-11.382224103, 10.526210382, -8.951712986), x_dir=(4.174135827959178e-15, 0.8787125762173496, -0.47735124216604746), z_dir=(1, 0, 0))) as fillet4_piece_2_section:
        with BuildLine():
            CenterArc((3.049747012, 4.860464876), FILLET4_R, 208.512549888, 47.919645029)
            Line((-1.343815869, 2.473708665), (0, 0))
            ThreePointArc((0, 0), (0.938383696, 0.111628099), (1.876767392, 0))
        make_face()
    fillet4_piece_2 = extrude(amount=22.764448206, mode=Mode.PRIVATE)
    fillet4_piece_2 = fillet4_piece_2 - Plane(origin=(14, 10.656145058, -11.550072123), x_dir=(0, 0.04994402769099318, -0.9987520183198637), z_dir=(0, -0.9987520183198637, -0.04994402769099318)) * Cylinder(10, 56, mode=Mode.PRIVATE)
    fillet4_piece_2 = fillet4_piece_2 - Plane(origin=(-14, 10.656145058, -11.550072123), x_dir=(0, 0.04994402769099318, -0.9987520183198637), z_dir=(0, 0.9987520183198637, 0.04994402769099318)) * Cylinder(10, 56, mode=Mode.PRIVATE)
    add(fillet4_piece_2)
    with BuildSketch(Plane(origin=(4, 8.463111178, -8.951712986), x_dir=(0, -0.8787125762172517, -0.4773512421662278), z_dir=(1, 0, 0))) as fillet4_piece_3_section:
        with BuildLine():
            CenterArc((3.049747012, -4.860464876), FILLET4_R, 103.567805083, 47.919645029)
            Line((-1.343815869, -2.473708665), (0, 0))
            ThreePointArc((0, 0), (0.938383696, -0.111628099), (1.876767392, 0))
        make_face()
    fillet4_piece_3 = extrude(amount=7.41057834, mode=Mode.PRIVATE)
    fillet4_piece_3 = fillet4_piece_3 - Plane(origin=(14, 8.598192062, -11.652983015), x_dir=(0, 0.04994402769099318, -0.9987520183198637), z_dir=(0, -0.9987520183198637, -0.04994402769099318)) * Cylinder(10, 25, mode=Mode.PRIVATE)
    add(fillet4_piece_3)


solid = part.part
